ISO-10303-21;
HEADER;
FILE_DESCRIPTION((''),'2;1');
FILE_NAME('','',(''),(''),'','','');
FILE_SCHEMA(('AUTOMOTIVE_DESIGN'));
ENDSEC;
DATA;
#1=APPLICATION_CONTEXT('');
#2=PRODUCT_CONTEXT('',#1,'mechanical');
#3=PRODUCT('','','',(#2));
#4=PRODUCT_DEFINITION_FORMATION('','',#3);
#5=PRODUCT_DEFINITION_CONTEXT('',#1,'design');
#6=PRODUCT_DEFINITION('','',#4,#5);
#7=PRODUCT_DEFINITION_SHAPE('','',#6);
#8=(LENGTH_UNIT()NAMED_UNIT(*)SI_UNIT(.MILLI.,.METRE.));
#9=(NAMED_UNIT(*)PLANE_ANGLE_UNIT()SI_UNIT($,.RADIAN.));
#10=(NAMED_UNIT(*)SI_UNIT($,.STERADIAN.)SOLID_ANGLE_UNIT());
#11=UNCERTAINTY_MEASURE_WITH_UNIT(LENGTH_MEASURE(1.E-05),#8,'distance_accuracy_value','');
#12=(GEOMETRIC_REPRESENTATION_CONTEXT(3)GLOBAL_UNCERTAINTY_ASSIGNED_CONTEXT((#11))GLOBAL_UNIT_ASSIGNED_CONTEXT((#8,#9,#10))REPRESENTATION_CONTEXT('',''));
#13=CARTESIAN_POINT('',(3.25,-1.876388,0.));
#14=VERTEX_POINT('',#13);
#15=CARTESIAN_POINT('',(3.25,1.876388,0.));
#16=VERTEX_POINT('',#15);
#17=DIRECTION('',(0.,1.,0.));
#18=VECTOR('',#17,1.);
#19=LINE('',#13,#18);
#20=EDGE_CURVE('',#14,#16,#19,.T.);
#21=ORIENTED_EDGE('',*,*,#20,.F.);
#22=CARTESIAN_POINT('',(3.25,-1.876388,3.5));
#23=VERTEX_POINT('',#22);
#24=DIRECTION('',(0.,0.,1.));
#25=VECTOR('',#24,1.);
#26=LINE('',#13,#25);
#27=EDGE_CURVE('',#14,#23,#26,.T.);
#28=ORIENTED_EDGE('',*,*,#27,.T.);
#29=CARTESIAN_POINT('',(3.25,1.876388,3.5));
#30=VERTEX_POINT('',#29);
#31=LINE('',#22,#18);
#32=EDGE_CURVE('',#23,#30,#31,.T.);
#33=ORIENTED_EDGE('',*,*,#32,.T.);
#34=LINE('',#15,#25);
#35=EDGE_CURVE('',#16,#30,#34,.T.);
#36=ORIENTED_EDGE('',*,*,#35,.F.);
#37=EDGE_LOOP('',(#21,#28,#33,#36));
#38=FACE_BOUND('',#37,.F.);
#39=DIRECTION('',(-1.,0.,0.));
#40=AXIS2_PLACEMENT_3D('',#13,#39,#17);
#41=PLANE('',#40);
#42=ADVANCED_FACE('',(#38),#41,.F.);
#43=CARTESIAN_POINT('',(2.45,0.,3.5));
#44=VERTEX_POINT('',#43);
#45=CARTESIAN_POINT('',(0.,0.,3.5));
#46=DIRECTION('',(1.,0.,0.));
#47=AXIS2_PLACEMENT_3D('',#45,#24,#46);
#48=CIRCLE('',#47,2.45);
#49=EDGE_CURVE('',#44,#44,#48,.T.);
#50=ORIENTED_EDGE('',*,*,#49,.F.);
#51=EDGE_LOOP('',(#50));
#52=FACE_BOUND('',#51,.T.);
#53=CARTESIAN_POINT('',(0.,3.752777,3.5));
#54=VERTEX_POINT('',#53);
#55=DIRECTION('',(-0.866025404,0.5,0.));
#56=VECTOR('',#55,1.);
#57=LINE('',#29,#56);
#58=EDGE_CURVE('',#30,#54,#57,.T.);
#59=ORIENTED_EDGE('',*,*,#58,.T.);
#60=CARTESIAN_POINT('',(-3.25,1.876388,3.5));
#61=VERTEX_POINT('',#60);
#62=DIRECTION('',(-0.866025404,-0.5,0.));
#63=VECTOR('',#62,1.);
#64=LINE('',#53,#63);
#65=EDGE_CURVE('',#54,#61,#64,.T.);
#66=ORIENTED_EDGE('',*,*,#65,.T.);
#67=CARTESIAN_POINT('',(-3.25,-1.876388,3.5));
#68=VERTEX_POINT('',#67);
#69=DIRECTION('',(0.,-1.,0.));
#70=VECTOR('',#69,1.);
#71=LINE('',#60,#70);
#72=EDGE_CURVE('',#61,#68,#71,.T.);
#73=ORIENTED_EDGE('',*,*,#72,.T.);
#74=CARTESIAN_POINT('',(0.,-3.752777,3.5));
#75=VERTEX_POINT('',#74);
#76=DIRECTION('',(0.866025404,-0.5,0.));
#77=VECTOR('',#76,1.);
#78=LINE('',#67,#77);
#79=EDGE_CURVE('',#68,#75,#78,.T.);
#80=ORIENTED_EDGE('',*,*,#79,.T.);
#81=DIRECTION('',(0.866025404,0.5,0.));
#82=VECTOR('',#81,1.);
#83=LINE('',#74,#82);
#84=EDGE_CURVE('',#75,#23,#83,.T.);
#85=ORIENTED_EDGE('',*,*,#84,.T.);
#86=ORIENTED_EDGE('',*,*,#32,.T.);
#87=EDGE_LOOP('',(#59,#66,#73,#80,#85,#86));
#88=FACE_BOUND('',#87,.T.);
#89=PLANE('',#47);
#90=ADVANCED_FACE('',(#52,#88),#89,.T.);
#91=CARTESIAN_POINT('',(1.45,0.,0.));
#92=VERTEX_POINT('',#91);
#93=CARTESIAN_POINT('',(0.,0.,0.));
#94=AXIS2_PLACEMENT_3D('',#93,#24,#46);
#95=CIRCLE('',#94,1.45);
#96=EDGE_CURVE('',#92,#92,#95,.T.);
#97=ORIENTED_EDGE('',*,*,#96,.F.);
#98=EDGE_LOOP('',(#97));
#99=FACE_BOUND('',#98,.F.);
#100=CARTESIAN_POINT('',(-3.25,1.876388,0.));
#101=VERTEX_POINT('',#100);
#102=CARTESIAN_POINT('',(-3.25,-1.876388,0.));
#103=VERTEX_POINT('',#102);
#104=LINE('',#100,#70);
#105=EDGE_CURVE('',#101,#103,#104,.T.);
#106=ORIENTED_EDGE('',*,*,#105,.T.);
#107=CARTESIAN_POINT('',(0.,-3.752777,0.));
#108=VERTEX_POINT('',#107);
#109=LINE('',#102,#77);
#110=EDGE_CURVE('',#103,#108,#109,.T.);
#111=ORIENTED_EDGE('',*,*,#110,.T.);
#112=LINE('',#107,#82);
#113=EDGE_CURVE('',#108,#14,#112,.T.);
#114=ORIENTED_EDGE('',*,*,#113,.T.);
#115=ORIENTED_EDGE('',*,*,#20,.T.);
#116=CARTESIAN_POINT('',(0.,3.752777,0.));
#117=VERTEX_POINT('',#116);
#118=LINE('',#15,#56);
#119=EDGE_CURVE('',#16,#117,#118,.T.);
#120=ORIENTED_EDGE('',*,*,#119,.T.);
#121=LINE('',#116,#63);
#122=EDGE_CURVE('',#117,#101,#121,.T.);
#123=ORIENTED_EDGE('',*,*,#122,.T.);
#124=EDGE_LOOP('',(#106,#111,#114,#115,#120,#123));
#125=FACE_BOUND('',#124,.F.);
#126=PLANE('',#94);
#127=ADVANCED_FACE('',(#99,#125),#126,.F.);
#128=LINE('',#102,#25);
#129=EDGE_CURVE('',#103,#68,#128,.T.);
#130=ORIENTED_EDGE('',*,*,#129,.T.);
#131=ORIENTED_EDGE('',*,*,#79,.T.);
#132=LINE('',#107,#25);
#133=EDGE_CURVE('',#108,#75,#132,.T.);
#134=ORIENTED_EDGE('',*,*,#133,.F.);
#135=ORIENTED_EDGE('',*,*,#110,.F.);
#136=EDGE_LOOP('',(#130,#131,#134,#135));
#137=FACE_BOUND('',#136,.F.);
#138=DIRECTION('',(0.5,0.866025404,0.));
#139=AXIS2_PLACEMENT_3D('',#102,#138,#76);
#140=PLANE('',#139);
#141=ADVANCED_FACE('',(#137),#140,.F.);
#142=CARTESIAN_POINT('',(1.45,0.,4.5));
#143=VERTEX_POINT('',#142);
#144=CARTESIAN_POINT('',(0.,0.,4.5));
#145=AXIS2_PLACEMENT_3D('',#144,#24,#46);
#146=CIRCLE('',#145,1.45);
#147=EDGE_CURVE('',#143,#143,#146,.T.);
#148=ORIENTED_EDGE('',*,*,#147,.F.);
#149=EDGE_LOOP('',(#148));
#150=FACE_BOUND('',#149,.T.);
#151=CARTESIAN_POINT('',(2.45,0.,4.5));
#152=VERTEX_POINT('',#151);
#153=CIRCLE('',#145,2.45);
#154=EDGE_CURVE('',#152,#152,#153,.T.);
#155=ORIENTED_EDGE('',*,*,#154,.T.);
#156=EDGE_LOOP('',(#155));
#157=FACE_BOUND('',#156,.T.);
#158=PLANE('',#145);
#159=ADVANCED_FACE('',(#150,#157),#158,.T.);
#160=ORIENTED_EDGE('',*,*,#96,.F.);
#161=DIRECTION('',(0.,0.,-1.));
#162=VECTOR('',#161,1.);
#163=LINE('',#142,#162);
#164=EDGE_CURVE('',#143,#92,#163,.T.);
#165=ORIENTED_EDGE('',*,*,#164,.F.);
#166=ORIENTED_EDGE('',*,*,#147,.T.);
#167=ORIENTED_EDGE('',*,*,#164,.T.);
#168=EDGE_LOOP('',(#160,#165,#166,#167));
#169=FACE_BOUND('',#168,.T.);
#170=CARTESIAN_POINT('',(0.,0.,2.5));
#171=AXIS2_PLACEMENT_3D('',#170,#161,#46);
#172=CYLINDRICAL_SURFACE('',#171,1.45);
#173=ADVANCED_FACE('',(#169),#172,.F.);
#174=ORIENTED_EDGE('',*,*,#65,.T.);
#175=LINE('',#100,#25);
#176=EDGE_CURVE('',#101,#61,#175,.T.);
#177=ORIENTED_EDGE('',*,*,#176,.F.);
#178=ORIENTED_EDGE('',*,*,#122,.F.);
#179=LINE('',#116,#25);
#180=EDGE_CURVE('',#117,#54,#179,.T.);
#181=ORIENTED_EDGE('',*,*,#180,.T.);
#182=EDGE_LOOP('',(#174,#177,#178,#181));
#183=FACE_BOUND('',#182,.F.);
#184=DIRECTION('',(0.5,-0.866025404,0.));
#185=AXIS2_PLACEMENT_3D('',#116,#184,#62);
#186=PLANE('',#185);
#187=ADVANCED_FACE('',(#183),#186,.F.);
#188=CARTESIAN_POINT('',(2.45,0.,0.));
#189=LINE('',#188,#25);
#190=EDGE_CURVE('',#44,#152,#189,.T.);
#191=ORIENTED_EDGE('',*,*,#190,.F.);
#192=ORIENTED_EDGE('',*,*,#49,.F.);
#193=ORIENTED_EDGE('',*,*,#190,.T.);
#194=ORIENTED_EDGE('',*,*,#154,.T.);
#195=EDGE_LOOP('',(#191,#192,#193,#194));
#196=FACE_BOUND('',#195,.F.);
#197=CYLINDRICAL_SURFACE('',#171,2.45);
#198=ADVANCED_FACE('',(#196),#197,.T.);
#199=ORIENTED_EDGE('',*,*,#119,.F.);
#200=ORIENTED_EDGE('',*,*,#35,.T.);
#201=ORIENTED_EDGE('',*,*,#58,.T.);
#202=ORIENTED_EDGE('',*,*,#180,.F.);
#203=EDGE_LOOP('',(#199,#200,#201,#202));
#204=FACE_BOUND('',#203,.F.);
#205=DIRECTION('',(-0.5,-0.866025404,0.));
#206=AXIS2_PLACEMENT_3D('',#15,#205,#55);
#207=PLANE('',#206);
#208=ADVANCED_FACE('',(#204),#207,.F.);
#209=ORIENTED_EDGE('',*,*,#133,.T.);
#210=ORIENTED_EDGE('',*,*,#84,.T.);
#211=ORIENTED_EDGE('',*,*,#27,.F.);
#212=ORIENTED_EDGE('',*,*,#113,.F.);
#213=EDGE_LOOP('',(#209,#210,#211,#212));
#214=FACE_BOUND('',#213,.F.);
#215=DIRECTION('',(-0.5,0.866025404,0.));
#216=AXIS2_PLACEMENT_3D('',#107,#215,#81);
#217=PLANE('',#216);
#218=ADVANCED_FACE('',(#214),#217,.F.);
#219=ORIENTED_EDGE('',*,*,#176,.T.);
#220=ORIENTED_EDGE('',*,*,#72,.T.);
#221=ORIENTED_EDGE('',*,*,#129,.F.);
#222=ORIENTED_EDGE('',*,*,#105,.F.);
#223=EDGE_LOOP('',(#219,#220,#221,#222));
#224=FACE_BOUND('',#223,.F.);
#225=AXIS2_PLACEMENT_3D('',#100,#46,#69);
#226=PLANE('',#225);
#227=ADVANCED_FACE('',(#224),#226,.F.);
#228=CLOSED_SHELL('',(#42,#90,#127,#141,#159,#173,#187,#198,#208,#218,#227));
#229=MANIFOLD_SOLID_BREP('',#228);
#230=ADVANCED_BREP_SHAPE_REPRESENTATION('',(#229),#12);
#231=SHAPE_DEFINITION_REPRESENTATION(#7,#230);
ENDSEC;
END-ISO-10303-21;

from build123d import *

# Parameters (mm, degrees)
F0_R     = 2.45
F0_R_2   = 1.45
F1_DEPTH = 2.5
F2_DEPTH = 2
F3_DEPTH = 3.5


# Not quite as in the source:
# - a feature names something its author has since deleted; it is built from what else it names


with BuildPart() as f1:
    # F0 (on Top) → F1 (new body)
    with BuildSketch(Plane.XY):
        Circle(F0_R)
        Circle(F0_R_2, mode=Mode.SUBTRACT)
    extrude(amount=F1_DEPTH)

    # F2 (add): a face of the model
    f2_faces = [f1.faces().sort_by_distance(p)[0] for p in [
        (-2.3807035354, 0, 2.5),
    ]]
    extrude(f2_faces, amount=F2_DEPTH)

    # F0 (on Top) → F3 (join)
    with BuildSketch(Plane.XY):
        Polygon((3.25, -1.8763883749), (3.25, 1.8763883749), (0, 3.7527767497), (-3.25, 1.8763883749), (-3.25, -1.8763883749), (0, -3.7527767497), align=None)
        Circle(F0_R, mode=Mode.SUBTRACT)
    extrude(amount=F3_DEPTH)


solid = f1.part
